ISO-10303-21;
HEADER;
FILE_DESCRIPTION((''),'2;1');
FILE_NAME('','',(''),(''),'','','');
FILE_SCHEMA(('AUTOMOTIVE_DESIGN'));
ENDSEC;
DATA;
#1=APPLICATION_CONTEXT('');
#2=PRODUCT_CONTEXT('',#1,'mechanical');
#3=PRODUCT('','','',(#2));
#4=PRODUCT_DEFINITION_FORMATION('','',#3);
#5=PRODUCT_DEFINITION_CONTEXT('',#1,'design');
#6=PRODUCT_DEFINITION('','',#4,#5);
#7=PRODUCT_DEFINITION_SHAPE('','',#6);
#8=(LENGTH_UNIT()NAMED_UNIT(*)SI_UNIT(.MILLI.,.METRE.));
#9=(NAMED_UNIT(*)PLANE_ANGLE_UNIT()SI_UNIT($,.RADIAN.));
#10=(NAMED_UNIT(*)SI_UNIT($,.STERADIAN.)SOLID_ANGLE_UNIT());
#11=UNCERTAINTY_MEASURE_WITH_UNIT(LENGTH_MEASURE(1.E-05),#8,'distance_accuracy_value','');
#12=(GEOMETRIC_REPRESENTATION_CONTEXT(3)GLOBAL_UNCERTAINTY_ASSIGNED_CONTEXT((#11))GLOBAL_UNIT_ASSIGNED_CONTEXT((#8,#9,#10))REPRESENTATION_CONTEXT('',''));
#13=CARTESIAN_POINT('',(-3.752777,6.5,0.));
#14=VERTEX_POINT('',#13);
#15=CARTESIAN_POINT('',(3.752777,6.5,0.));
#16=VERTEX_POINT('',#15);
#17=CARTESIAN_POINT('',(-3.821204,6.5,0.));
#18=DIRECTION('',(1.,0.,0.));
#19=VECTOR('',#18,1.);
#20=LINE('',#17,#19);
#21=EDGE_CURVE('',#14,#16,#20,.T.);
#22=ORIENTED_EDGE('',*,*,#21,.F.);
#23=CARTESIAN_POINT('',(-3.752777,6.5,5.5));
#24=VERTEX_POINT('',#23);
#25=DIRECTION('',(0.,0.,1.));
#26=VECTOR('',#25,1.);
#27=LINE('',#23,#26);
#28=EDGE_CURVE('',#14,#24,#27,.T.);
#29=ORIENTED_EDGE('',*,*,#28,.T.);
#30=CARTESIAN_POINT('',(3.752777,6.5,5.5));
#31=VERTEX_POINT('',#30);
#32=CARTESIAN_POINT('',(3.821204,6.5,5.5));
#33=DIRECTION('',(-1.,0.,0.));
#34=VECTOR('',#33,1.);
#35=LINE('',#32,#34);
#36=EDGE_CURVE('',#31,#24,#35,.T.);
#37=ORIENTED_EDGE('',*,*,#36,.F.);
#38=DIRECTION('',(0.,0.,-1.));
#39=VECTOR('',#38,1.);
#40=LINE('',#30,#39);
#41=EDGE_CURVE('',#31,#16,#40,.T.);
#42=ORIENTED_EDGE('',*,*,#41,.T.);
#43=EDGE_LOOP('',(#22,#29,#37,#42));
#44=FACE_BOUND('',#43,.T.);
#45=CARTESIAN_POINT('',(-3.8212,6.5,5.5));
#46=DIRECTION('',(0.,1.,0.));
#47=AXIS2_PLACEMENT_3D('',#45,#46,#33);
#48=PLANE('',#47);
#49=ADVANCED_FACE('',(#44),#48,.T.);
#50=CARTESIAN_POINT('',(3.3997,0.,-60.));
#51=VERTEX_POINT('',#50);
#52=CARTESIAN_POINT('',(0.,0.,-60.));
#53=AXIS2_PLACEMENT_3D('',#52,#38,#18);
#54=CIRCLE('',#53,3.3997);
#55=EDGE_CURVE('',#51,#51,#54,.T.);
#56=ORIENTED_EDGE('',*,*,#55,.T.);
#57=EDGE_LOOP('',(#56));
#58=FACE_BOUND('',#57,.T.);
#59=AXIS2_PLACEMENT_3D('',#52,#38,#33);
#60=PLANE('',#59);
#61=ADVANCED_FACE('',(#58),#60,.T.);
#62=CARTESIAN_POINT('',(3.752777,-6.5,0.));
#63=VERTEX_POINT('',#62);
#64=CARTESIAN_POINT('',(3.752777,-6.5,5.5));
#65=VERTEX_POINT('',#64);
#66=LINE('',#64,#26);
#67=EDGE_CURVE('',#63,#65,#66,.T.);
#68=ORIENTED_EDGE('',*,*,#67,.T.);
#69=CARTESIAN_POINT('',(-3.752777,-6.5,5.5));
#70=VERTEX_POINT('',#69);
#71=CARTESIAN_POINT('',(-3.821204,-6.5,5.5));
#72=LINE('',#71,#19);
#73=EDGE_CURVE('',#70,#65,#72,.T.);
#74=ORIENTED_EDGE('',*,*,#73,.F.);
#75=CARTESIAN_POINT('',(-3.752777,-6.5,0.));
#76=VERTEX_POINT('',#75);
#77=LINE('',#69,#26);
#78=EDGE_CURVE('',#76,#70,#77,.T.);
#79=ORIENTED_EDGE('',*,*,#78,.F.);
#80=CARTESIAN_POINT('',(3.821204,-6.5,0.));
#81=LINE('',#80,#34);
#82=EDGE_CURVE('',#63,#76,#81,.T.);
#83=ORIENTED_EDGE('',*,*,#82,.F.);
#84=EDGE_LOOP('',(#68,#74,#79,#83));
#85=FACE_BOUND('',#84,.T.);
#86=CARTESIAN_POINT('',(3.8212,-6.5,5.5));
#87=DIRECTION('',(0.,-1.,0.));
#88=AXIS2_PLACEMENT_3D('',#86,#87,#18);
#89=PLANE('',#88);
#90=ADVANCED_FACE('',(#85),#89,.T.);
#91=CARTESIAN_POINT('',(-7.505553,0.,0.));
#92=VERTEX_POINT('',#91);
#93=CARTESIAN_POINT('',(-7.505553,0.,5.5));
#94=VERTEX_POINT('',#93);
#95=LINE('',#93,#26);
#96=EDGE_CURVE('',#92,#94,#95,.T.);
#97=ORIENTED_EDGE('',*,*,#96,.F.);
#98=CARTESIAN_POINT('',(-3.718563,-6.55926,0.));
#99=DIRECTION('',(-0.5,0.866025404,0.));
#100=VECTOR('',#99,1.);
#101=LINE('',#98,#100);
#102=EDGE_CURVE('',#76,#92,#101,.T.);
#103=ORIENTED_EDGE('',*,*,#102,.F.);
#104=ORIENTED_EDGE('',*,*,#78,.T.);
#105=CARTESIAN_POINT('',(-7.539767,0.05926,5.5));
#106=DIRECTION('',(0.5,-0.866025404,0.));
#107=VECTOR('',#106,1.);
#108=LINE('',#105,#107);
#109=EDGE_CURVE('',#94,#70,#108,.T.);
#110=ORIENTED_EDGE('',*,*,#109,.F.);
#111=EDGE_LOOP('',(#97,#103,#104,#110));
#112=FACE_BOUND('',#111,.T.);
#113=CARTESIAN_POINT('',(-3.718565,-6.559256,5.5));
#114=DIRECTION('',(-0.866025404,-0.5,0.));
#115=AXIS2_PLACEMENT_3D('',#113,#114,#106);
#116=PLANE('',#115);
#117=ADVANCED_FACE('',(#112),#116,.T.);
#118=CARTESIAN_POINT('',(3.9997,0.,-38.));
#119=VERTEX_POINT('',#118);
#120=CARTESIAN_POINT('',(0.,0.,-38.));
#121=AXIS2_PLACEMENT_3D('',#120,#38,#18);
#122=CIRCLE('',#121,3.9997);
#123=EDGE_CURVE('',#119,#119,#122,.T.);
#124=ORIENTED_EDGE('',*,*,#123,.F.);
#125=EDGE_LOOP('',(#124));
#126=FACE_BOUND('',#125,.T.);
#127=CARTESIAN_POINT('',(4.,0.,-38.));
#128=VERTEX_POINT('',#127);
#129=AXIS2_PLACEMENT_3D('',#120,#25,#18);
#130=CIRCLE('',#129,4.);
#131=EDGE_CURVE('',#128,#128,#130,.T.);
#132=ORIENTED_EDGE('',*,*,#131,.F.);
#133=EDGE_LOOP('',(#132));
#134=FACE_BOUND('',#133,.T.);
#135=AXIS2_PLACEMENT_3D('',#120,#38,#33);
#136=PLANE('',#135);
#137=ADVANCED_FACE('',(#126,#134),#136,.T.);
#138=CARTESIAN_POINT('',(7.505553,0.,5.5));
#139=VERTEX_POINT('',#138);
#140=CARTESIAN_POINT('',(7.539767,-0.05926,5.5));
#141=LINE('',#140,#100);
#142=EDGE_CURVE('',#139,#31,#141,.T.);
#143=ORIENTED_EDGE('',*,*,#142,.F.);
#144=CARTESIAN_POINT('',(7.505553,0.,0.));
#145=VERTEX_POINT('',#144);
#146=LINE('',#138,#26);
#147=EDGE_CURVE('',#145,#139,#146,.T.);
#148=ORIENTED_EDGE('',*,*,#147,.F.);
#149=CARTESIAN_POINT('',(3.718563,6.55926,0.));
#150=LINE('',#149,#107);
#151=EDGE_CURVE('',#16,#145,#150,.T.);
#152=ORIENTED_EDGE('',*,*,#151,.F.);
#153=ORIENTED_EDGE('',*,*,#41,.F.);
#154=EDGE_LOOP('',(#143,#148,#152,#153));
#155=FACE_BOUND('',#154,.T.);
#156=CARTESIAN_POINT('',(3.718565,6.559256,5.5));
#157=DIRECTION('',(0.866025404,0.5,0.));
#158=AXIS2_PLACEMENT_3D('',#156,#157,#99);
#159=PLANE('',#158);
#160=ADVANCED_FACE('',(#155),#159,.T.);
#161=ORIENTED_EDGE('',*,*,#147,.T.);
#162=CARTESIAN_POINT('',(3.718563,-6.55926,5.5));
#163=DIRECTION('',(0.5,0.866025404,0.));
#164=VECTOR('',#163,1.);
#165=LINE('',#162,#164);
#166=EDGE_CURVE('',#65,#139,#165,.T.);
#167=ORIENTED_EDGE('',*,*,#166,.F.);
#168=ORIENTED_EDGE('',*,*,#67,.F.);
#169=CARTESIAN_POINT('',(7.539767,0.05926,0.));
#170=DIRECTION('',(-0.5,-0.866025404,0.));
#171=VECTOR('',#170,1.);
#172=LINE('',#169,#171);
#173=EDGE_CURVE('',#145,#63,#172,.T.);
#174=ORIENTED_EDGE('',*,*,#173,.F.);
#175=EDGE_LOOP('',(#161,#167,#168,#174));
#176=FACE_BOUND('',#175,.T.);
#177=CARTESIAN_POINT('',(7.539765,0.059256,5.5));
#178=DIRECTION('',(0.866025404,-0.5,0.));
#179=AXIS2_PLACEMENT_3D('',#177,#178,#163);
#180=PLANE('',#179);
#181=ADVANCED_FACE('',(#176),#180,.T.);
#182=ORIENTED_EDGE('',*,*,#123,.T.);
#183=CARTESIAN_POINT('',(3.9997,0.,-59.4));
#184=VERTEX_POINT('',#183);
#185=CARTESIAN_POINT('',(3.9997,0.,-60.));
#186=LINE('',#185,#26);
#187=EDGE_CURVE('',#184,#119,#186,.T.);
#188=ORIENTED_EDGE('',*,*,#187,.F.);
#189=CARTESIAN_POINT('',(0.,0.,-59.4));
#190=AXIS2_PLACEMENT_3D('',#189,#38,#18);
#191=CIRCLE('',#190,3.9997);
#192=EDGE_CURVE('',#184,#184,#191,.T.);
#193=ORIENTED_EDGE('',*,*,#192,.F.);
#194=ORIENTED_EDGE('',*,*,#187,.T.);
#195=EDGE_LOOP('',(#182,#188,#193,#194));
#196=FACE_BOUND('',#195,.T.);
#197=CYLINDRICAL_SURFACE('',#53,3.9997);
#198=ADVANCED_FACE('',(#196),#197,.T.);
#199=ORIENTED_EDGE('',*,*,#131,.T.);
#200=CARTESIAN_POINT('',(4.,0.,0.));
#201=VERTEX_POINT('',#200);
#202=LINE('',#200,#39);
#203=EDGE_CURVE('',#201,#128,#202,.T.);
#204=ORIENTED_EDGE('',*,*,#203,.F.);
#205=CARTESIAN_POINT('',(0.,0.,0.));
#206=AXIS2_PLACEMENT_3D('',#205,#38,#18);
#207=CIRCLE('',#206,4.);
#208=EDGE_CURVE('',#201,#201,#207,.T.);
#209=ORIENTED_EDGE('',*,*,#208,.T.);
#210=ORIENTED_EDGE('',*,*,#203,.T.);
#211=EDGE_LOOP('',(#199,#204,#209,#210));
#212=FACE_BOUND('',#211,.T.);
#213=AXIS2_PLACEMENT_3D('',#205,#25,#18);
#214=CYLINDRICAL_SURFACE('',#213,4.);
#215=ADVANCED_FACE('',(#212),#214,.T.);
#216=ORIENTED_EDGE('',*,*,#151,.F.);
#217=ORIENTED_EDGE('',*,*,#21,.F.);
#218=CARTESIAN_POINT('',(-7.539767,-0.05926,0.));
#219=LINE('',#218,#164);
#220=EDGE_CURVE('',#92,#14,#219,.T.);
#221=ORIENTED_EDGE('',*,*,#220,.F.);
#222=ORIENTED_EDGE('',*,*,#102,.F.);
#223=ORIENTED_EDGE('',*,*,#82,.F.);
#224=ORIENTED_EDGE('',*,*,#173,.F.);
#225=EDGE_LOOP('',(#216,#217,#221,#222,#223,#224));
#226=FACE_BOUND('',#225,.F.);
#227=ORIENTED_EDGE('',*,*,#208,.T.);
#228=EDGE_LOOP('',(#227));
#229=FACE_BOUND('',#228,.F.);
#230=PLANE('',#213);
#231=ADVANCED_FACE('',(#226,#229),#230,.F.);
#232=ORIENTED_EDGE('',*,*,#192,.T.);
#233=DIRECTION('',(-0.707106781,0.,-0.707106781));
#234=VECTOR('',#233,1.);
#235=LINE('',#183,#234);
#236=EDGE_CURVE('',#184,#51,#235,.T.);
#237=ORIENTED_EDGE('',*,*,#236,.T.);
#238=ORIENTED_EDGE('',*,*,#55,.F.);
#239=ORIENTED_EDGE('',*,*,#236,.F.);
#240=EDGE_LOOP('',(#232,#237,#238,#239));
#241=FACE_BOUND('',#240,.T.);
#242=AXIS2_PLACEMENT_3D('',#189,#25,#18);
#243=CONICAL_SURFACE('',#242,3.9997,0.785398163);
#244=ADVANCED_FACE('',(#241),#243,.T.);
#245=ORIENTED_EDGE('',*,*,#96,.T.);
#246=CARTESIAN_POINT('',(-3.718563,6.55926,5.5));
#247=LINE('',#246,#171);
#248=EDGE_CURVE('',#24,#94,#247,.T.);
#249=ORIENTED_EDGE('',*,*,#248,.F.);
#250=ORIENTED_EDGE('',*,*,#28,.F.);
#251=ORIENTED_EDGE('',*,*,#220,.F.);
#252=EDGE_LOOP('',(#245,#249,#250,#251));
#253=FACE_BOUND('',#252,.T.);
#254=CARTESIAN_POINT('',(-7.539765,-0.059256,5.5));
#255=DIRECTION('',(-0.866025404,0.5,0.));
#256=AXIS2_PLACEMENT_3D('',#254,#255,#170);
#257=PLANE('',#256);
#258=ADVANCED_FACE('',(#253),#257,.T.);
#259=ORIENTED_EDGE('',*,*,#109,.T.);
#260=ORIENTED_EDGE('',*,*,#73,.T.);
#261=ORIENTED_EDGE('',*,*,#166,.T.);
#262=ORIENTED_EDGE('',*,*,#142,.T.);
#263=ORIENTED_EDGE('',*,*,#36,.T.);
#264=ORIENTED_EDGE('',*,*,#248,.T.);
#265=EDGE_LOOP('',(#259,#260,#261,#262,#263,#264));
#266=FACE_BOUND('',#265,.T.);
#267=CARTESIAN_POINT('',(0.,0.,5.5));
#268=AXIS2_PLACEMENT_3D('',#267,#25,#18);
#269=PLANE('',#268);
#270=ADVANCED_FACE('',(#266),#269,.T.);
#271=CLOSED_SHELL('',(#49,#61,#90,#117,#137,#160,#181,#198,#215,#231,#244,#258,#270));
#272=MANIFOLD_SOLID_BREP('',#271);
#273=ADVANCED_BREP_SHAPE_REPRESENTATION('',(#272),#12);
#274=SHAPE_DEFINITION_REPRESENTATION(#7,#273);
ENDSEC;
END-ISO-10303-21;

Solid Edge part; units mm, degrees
sketch "Sketch1" plane through (0, 0, 0) normal (0, 0, 1) x (1, 0, 0)
  circle A0 centre (0, 0) radius 7.54
  dimension "D1" = 15.08
extrude "Protrusion1" add sketch "Sketch1" along normal blind 5.5
sketch "Sketch2" plane through (0, 0, 0) normal (0, 0, -1) x (1, 0, 0)
  circle A0 centre (0, 0) radius 4
extrude "Protrusion2" add sketch "Sketch2" along normal blind 60
sketch "Sketch3" plane through (0, 0, -60) normal (0, 0, -1) x (1, 0, 0)
  circle A0 centre (0, 0) radius 3.9997
extrude "Cutout1" cut sketch "Sketch3" against normal blind 22 flip side to cut
chamfer "Chamfer_1" distance 0.6 angle 45 1 edges at (-3.9997, 0, -60)
sketch "Sketch4" plane through (0, 0, 5.5) normal (0, 0, 1) x (1, 0, 0)
  line L0 (-3.8212, 6.5) -> (3.8212, 6.5)
  dimension "D1" = 13
extrude "Cutout2" cut sketch "Sketch4" against normal up to next material side at (0, 6.55, 5.5)
pattern_circular "Pattern1" count 6 over 360 about axis through (0, 0, 5.5) along (0, 0, 1) of "Cutout2"
properties part number "24101204"
